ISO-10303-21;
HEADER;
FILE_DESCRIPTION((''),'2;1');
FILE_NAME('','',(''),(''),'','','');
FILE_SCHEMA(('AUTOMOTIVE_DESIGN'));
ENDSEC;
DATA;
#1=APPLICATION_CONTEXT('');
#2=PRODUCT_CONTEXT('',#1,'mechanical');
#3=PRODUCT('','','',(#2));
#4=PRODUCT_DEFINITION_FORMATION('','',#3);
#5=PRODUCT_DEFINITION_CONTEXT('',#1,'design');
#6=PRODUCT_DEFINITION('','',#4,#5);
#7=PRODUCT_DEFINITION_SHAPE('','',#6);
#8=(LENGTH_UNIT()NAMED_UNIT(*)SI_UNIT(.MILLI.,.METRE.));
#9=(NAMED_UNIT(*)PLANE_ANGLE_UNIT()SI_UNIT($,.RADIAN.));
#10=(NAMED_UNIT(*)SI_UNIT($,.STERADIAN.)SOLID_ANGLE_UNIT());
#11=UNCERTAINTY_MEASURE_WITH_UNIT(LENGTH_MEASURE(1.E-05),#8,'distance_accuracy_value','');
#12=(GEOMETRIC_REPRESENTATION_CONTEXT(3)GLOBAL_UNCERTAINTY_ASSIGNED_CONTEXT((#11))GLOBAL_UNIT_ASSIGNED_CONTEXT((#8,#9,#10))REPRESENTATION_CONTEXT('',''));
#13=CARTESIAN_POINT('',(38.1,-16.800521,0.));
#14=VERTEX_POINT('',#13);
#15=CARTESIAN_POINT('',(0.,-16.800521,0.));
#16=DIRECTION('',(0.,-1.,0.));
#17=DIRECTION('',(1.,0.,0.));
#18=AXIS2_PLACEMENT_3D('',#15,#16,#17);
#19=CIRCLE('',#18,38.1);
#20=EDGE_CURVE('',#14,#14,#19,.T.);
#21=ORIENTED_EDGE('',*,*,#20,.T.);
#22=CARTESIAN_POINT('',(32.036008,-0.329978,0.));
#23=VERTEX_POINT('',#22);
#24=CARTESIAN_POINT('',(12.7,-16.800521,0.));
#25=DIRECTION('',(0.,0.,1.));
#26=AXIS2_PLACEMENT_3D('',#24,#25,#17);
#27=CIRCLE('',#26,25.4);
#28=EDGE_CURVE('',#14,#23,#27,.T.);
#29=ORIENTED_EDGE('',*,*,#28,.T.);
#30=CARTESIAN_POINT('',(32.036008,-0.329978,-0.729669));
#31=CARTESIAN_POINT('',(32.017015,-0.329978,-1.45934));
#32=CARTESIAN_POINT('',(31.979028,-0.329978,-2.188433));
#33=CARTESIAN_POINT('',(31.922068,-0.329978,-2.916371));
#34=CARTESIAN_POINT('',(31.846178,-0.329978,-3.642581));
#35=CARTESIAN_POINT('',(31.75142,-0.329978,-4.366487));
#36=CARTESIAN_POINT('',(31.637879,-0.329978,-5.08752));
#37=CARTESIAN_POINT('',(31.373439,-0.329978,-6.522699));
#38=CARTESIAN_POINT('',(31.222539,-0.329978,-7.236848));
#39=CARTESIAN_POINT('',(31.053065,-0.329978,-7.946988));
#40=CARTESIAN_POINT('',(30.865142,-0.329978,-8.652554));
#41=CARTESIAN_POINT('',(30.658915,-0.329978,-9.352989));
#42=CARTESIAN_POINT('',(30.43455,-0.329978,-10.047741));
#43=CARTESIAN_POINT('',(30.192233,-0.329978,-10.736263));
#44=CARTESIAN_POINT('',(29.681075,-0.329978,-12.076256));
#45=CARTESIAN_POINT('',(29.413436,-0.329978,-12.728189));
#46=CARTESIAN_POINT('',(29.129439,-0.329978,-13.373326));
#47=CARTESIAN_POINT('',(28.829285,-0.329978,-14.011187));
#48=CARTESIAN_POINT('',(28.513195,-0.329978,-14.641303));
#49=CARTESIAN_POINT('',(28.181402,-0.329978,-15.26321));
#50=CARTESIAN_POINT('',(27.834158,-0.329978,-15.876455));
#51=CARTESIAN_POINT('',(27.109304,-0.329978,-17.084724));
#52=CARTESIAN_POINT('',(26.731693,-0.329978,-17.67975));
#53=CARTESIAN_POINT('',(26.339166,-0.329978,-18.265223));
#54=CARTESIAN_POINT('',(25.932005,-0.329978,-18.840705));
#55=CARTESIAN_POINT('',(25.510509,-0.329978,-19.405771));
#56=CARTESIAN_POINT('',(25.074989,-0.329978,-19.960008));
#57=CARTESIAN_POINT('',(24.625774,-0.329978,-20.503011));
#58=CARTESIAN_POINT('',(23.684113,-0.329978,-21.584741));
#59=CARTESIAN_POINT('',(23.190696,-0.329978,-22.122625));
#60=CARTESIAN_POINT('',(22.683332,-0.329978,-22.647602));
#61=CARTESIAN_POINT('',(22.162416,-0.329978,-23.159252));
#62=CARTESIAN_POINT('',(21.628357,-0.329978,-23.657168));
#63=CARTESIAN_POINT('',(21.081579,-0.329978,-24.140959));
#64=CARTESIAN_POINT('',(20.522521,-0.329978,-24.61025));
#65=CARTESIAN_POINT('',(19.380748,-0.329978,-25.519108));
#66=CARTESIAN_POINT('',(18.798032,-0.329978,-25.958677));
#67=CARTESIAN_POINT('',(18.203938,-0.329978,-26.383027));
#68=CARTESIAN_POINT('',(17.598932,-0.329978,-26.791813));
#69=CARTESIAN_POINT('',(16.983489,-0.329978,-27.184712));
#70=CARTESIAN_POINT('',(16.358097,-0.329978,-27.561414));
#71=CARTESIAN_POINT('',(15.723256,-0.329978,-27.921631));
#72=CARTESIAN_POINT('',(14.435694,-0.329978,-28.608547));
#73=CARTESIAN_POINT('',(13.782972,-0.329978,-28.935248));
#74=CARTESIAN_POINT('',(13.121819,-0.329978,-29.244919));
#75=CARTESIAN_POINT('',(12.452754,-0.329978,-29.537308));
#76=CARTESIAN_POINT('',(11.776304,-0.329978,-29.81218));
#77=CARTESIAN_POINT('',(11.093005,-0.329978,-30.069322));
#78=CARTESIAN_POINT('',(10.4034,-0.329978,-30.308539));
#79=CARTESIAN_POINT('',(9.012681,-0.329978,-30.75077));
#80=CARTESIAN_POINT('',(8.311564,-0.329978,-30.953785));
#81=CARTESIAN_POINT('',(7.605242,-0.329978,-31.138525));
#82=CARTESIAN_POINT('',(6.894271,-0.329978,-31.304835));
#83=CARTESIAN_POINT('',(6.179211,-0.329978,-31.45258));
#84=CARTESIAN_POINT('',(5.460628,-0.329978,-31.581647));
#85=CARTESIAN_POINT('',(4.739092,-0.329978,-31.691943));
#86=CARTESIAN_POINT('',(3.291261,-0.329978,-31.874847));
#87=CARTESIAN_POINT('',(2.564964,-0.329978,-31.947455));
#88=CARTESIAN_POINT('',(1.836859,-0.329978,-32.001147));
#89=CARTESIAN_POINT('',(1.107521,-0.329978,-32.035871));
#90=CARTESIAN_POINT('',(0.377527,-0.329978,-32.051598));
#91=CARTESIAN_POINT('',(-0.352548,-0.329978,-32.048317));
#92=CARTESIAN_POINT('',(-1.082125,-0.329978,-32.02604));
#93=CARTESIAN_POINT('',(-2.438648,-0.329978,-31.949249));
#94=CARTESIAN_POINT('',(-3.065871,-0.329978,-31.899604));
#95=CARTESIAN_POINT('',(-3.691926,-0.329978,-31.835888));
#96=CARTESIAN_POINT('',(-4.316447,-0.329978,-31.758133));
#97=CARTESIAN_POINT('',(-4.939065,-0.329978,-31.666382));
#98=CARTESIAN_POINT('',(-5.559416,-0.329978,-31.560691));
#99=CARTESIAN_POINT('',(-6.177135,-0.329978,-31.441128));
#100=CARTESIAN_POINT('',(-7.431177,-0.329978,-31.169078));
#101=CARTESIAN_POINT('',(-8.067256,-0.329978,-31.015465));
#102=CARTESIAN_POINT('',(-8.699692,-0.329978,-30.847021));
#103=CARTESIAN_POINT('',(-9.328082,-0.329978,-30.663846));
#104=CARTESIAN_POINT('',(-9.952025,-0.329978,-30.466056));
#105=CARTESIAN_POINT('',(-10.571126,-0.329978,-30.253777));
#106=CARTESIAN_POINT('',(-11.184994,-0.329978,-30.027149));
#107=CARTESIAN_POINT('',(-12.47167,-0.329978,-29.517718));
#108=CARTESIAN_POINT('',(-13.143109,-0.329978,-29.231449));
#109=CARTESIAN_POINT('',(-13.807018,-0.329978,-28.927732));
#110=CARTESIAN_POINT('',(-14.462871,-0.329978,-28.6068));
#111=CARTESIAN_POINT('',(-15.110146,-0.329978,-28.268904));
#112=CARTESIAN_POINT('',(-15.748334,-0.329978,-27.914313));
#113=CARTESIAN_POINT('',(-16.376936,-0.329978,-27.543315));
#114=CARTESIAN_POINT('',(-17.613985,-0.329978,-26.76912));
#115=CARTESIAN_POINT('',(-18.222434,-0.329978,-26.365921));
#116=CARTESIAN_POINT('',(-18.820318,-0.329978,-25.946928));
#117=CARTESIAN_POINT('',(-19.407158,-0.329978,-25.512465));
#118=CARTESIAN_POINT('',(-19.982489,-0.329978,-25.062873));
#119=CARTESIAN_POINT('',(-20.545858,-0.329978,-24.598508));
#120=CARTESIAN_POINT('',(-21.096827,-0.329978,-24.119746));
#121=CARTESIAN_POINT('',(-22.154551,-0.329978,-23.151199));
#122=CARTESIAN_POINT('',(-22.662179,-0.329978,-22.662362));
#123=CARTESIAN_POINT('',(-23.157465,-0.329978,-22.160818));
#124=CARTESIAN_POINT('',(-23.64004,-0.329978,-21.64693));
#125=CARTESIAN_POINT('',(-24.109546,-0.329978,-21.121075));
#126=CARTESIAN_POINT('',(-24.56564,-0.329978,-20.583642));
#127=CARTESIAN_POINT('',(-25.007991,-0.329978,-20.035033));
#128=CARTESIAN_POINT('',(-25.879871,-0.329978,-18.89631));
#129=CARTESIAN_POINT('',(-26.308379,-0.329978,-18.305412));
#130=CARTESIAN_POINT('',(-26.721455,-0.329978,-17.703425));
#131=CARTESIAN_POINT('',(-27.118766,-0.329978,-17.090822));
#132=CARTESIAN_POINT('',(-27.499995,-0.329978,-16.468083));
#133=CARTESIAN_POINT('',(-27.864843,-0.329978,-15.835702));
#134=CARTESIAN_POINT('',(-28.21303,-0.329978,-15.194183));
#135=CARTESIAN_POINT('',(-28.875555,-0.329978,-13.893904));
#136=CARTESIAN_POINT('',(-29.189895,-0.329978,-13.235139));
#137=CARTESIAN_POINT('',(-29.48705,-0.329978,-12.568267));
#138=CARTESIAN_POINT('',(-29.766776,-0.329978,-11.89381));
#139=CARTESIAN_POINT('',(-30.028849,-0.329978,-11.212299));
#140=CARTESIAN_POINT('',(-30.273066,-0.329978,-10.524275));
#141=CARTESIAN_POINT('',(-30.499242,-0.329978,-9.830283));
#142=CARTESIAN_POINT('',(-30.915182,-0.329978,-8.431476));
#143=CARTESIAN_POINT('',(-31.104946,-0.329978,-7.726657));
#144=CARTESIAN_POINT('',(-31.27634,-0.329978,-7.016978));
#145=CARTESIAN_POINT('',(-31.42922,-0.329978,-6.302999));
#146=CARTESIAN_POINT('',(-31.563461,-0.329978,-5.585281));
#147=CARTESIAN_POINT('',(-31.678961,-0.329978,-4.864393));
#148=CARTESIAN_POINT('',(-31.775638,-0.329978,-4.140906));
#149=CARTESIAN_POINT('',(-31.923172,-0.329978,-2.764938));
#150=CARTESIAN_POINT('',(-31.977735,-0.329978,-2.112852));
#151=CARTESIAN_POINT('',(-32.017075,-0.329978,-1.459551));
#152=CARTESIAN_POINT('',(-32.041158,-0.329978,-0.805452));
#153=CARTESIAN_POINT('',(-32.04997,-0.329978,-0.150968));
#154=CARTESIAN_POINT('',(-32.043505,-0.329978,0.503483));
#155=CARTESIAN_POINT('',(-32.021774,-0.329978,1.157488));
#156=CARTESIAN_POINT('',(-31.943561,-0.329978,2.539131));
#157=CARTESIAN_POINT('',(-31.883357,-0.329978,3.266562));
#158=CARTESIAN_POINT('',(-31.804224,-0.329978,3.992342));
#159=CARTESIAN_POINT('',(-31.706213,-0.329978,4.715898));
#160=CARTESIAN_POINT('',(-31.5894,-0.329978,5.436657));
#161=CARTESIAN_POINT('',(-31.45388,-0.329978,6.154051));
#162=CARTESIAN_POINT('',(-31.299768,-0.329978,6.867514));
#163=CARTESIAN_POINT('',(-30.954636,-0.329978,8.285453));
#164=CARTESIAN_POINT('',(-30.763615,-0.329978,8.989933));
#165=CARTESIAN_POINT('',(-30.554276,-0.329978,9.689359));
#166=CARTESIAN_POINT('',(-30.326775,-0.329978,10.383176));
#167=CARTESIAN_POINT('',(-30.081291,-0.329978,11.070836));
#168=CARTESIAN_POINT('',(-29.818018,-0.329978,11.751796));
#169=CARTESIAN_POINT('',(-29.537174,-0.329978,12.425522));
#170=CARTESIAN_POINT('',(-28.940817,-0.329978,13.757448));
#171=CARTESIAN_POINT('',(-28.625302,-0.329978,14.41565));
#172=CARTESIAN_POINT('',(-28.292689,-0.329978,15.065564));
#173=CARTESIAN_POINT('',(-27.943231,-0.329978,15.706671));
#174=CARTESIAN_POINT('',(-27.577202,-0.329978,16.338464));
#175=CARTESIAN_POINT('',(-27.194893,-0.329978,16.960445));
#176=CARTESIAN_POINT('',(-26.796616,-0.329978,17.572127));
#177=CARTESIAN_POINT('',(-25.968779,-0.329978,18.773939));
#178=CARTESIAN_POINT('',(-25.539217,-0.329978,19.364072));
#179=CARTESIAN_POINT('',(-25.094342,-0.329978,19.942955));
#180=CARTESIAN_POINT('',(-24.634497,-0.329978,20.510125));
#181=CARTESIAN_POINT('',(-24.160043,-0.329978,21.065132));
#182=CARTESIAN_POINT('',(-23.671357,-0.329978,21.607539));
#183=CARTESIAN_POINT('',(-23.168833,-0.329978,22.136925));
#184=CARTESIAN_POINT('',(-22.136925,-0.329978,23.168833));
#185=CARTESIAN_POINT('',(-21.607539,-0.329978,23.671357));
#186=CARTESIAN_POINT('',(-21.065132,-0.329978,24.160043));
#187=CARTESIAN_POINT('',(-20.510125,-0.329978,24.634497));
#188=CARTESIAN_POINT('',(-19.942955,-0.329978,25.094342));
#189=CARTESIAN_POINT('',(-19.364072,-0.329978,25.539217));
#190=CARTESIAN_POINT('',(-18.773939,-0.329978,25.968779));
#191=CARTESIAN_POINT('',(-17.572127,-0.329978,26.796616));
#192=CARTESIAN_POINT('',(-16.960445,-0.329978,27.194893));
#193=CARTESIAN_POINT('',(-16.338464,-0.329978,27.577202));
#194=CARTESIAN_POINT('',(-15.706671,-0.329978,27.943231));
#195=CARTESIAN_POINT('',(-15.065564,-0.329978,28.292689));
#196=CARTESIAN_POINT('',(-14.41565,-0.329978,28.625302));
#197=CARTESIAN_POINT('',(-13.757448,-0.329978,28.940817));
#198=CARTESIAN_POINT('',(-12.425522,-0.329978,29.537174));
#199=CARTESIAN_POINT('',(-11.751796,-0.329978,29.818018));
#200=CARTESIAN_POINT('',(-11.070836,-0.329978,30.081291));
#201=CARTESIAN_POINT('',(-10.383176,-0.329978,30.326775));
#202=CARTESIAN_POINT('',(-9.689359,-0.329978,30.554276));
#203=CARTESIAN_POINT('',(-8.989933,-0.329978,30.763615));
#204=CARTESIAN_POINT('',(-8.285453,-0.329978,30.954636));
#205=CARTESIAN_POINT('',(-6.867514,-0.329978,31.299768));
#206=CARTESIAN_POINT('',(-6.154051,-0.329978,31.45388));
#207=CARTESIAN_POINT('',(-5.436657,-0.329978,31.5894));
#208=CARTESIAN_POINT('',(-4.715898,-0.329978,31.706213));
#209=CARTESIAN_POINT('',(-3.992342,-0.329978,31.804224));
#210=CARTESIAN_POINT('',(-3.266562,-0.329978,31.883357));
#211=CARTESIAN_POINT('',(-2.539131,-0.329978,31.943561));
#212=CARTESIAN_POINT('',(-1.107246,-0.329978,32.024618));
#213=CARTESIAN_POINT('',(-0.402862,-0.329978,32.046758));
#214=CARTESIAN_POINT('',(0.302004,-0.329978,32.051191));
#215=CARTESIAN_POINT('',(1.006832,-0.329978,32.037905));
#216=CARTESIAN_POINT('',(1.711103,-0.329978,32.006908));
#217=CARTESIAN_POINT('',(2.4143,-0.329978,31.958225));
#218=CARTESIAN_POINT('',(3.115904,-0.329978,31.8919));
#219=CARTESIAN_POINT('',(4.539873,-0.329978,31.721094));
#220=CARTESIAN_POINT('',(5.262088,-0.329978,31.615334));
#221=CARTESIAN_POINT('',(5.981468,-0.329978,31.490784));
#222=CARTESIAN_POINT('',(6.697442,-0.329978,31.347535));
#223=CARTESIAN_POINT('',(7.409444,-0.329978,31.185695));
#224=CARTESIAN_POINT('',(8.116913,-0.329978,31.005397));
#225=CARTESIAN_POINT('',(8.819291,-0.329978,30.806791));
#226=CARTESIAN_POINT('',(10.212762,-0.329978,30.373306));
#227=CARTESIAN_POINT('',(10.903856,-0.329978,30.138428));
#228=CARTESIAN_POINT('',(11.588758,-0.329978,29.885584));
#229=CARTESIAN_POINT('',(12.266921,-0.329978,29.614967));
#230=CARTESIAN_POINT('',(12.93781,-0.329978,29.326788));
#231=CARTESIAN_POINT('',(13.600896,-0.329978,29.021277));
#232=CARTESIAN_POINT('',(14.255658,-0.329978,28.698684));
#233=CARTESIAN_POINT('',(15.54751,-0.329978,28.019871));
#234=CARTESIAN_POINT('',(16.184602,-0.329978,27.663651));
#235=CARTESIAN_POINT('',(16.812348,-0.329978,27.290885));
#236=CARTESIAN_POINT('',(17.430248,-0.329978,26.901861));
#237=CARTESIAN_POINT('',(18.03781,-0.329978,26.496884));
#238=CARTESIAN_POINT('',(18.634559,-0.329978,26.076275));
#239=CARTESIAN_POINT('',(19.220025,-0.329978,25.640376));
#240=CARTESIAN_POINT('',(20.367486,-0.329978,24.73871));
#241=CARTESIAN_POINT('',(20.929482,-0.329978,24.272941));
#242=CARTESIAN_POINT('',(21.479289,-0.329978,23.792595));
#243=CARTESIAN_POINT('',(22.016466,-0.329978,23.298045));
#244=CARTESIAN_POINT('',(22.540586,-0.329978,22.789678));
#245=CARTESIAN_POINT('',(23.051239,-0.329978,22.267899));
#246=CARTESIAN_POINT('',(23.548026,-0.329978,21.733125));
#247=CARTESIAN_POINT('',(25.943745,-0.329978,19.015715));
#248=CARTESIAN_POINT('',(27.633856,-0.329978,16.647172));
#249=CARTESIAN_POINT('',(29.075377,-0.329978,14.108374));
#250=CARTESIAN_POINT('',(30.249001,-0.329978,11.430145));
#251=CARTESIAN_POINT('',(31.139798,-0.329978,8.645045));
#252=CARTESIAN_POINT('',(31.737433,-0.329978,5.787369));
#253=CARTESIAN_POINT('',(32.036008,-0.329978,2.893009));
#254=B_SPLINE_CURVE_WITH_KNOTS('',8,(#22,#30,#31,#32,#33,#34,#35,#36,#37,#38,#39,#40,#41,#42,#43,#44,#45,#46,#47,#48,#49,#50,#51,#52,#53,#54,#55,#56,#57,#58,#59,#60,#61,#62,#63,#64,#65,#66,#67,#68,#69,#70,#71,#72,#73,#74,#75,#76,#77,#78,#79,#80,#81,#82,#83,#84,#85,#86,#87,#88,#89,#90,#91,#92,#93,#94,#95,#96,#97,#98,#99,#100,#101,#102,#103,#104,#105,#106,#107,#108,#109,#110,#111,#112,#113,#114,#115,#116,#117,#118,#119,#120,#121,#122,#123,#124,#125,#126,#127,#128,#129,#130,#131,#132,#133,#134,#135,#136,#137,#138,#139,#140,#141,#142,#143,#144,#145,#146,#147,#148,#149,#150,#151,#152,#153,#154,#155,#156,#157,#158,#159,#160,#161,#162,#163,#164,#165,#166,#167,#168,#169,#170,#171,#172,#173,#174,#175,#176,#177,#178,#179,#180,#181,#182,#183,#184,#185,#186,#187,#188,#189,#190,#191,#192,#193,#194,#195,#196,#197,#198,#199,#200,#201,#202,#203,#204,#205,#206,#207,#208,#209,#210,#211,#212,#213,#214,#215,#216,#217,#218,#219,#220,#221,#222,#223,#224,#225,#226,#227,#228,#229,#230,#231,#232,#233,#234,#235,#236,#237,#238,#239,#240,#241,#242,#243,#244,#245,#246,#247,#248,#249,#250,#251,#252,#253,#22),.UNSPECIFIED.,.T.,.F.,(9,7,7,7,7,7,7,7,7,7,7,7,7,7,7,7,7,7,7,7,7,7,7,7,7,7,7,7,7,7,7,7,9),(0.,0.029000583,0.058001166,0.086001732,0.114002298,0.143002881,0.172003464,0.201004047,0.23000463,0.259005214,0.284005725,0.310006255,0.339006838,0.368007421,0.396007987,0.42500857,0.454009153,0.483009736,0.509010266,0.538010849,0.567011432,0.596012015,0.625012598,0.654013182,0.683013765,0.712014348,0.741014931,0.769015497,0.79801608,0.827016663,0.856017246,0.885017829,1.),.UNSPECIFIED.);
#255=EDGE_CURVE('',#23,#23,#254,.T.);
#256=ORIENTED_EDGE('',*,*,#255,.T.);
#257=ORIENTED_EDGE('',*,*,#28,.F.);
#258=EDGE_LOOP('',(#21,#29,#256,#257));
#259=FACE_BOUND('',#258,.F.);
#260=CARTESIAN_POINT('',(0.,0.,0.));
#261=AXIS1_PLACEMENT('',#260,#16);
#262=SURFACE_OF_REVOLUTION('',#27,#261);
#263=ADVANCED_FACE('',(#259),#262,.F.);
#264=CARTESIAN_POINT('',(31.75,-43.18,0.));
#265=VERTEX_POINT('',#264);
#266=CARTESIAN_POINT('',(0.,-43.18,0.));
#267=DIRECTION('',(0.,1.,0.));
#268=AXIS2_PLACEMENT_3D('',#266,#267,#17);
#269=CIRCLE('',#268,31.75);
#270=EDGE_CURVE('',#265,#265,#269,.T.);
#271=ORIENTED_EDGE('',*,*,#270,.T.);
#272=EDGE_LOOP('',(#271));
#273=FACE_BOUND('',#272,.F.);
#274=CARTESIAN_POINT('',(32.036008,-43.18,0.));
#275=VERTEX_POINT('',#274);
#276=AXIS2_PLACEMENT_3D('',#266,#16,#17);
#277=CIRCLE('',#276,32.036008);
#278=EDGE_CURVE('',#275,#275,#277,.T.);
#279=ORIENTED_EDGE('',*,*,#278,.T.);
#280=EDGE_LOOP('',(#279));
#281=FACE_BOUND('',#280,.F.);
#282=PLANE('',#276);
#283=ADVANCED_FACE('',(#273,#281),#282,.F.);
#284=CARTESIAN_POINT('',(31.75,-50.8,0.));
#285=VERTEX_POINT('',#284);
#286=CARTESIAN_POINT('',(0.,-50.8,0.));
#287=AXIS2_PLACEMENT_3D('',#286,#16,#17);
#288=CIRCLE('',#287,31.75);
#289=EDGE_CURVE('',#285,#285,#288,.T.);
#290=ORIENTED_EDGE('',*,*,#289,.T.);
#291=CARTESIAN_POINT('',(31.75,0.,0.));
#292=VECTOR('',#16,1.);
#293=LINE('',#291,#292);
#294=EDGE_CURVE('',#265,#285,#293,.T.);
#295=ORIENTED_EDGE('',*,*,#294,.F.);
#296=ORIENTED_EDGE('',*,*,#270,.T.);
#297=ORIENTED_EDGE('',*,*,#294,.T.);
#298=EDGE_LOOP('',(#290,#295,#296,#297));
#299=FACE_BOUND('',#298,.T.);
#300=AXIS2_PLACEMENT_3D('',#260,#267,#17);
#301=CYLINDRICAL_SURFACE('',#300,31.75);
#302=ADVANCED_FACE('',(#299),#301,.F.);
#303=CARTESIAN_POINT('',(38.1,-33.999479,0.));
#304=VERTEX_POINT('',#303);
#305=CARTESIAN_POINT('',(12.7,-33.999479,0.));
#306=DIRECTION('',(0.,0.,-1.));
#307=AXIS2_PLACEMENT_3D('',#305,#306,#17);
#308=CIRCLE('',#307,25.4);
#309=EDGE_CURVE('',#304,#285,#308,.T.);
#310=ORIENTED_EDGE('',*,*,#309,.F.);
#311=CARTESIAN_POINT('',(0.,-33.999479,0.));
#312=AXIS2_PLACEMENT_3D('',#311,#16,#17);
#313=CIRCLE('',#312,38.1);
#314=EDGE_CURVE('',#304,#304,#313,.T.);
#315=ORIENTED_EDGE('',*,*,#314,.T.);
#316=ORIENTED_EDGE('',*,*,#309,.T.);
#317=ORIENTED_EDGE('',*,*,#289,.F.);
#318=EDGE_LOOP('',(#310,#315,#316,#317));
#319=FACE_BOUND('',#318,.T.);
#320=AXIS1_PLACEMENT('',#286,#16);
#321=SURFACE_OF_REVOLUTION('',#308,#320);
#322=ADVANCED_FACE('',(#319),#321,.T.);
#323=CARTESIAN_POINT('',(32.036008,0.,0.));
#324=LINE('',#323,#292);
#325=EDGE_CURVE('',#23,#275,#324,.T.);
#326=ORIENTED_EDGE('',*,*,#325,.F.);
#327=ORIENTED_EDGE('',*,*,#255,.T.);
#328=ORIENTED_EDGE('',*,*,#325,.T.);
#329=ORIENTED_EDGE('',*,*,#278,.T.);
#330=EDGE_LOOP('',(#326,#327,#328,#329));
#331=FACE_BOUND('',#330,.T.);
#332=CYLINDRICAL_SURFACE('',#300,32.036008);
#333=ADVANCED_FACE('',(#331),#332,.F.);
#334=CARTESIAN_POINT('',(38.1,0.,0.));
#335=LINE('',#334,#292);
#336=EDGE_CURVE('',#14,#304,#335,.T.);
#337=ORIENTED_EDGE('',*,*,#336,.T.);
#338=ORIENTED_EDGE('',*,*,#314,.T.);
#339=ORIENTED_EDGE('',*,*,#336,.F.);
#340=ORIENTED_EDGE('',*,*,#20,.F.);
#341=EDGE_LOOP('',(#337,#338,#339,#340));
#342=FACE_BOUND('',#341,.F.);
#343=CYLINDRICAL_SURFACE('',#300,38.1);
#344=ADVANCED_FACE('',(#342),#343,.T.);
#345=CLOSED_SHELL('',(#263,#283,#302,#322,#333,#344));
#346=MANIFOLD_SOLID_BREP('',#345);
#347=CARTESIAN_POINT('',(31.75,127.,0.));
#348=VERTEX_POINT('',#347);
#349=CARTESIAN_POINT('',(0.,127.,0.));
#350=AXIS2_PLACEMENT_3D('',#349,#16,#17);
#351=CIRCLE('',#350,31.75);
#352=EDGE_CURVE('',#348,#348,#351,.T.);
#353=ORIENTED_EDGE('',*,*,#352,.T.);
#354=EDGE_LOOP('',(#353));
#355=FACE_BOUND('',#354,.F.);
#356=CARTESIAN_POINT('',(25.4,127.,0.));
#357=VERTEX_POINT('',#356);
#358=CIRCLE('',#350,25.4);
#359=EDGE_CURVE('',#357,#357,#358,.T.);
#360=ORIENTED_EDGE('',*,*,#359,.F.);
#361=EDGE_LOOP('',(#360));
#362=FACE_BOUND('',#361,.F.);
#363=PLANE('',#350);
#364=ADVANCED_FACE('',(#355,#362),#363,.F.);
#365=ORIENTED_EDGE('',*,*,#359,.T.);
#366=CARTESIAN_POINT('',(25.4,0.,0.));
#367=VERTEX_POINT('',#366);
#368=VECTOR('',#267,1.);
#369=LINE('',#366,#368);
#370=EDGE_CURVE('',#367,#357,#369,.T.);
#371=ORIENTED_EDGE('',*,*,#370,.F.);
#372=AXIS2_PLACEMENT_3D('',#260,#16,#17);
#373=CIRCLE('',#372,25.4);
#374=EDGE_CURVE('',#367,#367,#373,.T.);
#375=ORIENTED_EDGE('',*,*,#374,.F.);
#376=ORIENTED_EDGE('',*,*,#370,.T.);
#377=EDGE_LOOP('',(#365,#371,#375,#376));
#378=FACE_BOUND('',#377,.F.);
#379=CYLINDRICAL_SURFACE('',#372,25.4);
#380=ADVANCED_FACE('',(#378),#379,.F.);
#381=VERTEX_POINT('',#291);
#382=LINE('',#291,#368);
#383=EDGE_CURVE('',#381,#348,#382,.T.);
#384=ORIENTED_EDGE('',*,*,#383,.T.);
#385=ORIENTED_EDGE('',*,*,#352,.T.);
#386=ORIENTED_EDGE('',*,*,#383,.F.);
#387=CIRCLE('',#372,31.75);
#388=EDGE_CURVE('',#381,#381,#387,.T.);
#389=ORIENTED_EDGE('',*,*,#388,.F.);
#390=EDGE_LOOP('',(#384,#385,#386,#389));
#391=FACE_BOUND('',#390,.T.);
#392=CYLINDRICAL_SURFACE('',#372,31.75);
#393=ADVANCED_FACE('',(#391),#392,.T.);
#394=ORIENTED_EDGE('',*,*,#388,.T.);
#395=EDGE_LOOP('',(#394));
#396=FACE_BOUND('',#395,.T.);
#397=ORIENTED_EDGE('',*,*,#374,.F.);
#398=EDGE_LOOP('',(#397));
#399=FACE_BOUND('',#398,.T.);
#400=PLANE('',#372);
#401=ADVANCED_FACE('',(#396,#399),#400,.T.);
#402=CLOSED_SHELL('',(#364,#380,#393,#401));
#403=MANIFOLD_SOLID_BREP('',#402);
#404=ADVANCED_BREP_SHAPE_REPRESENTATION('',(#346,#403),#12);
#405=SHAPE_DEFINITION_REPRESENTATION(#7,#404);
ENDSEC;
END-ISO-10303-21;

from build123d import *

# Parameters (mm, degrees)
F0_R     = 38.1
F0_R_2   = 31.75
F1_DEPTH = 50.8
F4_R     = 32.0360083413
F5_DEPTH = 43.18
F6_R     = 31.75
F6_R_2   = 25.4
F7_DEPTH = 127


# Not quite as in the source:
# - a fillet or chamfer that OpenCascade refuses, or shapes differently, is made with other operations: its cross-section is extruded or revolved along the edge and cut away or added


with BuildPart() as f1:
    # F0 (on Front) → F1 (new body)
    with BuildSketch(Plane.XZ):
        Circle(F0_R)
        Circle(F0_R_2, mode=Mode.SUBTRACT)
    extrude(amount=F1_DEPTH)

    # F2: fillet of radius 25.4 on 1 edges, made by hand

    # F2_s1 → F2_t2 (revolve, cut)
    with BuildSketch(Plane.XY):
        with BuildLine():
            ThreePointArc((38.1, -33.9994791747), (36.459524406, -42.9797352958), (31.75, -50.8))
            Line((31.75, -50.8), (38.1, -50.8))
            Line((38.1, -50.8), (38.1, -33.9994791747))
        make_face()
    revolve(axis=Axis((0, -50.8, 0), (0, -1, 0)), mode=Mode.SUBTRACT)

    # F3: fillet of radius 25.4 on 1 edges, made by hand

    # F3_s1 → F3_t2 (revolve, cut)
    with BuildSketch(Plane.XY):
        with BuildLine():
            ThreePointArc((38.1, -16.8005208253), (36.459524406, -7.8202647042), (31.75, 0))
            Line((31.75, 0), (38.1, 0))
            Line((38.1, 0), (38.1, -16.8005208253))
        make_face()
    revolve(axis=Axis((0, 0, 0), (0, -1, 0)), mode=Mode.SUBTRACT)

    # F4 (on Front) → F5 (cut)
    with BuildSketch(Plane.XZ):
        Circle(F4_R)
    extrude(amount=F5_DEPTH, mode=Mode.SUBTRACT)


with BuildPart() as f7:
    # F6 (on Front) → F7 (new body)
    with BuildSketch(Plane.XZ):
        Circle(F6_R)
        Circle(F6_R_2, mode=Mode.SUBTRACT)
    extrude(amount=-F7_DEPTH)


solid = Compound([f1.part, f7.part])
